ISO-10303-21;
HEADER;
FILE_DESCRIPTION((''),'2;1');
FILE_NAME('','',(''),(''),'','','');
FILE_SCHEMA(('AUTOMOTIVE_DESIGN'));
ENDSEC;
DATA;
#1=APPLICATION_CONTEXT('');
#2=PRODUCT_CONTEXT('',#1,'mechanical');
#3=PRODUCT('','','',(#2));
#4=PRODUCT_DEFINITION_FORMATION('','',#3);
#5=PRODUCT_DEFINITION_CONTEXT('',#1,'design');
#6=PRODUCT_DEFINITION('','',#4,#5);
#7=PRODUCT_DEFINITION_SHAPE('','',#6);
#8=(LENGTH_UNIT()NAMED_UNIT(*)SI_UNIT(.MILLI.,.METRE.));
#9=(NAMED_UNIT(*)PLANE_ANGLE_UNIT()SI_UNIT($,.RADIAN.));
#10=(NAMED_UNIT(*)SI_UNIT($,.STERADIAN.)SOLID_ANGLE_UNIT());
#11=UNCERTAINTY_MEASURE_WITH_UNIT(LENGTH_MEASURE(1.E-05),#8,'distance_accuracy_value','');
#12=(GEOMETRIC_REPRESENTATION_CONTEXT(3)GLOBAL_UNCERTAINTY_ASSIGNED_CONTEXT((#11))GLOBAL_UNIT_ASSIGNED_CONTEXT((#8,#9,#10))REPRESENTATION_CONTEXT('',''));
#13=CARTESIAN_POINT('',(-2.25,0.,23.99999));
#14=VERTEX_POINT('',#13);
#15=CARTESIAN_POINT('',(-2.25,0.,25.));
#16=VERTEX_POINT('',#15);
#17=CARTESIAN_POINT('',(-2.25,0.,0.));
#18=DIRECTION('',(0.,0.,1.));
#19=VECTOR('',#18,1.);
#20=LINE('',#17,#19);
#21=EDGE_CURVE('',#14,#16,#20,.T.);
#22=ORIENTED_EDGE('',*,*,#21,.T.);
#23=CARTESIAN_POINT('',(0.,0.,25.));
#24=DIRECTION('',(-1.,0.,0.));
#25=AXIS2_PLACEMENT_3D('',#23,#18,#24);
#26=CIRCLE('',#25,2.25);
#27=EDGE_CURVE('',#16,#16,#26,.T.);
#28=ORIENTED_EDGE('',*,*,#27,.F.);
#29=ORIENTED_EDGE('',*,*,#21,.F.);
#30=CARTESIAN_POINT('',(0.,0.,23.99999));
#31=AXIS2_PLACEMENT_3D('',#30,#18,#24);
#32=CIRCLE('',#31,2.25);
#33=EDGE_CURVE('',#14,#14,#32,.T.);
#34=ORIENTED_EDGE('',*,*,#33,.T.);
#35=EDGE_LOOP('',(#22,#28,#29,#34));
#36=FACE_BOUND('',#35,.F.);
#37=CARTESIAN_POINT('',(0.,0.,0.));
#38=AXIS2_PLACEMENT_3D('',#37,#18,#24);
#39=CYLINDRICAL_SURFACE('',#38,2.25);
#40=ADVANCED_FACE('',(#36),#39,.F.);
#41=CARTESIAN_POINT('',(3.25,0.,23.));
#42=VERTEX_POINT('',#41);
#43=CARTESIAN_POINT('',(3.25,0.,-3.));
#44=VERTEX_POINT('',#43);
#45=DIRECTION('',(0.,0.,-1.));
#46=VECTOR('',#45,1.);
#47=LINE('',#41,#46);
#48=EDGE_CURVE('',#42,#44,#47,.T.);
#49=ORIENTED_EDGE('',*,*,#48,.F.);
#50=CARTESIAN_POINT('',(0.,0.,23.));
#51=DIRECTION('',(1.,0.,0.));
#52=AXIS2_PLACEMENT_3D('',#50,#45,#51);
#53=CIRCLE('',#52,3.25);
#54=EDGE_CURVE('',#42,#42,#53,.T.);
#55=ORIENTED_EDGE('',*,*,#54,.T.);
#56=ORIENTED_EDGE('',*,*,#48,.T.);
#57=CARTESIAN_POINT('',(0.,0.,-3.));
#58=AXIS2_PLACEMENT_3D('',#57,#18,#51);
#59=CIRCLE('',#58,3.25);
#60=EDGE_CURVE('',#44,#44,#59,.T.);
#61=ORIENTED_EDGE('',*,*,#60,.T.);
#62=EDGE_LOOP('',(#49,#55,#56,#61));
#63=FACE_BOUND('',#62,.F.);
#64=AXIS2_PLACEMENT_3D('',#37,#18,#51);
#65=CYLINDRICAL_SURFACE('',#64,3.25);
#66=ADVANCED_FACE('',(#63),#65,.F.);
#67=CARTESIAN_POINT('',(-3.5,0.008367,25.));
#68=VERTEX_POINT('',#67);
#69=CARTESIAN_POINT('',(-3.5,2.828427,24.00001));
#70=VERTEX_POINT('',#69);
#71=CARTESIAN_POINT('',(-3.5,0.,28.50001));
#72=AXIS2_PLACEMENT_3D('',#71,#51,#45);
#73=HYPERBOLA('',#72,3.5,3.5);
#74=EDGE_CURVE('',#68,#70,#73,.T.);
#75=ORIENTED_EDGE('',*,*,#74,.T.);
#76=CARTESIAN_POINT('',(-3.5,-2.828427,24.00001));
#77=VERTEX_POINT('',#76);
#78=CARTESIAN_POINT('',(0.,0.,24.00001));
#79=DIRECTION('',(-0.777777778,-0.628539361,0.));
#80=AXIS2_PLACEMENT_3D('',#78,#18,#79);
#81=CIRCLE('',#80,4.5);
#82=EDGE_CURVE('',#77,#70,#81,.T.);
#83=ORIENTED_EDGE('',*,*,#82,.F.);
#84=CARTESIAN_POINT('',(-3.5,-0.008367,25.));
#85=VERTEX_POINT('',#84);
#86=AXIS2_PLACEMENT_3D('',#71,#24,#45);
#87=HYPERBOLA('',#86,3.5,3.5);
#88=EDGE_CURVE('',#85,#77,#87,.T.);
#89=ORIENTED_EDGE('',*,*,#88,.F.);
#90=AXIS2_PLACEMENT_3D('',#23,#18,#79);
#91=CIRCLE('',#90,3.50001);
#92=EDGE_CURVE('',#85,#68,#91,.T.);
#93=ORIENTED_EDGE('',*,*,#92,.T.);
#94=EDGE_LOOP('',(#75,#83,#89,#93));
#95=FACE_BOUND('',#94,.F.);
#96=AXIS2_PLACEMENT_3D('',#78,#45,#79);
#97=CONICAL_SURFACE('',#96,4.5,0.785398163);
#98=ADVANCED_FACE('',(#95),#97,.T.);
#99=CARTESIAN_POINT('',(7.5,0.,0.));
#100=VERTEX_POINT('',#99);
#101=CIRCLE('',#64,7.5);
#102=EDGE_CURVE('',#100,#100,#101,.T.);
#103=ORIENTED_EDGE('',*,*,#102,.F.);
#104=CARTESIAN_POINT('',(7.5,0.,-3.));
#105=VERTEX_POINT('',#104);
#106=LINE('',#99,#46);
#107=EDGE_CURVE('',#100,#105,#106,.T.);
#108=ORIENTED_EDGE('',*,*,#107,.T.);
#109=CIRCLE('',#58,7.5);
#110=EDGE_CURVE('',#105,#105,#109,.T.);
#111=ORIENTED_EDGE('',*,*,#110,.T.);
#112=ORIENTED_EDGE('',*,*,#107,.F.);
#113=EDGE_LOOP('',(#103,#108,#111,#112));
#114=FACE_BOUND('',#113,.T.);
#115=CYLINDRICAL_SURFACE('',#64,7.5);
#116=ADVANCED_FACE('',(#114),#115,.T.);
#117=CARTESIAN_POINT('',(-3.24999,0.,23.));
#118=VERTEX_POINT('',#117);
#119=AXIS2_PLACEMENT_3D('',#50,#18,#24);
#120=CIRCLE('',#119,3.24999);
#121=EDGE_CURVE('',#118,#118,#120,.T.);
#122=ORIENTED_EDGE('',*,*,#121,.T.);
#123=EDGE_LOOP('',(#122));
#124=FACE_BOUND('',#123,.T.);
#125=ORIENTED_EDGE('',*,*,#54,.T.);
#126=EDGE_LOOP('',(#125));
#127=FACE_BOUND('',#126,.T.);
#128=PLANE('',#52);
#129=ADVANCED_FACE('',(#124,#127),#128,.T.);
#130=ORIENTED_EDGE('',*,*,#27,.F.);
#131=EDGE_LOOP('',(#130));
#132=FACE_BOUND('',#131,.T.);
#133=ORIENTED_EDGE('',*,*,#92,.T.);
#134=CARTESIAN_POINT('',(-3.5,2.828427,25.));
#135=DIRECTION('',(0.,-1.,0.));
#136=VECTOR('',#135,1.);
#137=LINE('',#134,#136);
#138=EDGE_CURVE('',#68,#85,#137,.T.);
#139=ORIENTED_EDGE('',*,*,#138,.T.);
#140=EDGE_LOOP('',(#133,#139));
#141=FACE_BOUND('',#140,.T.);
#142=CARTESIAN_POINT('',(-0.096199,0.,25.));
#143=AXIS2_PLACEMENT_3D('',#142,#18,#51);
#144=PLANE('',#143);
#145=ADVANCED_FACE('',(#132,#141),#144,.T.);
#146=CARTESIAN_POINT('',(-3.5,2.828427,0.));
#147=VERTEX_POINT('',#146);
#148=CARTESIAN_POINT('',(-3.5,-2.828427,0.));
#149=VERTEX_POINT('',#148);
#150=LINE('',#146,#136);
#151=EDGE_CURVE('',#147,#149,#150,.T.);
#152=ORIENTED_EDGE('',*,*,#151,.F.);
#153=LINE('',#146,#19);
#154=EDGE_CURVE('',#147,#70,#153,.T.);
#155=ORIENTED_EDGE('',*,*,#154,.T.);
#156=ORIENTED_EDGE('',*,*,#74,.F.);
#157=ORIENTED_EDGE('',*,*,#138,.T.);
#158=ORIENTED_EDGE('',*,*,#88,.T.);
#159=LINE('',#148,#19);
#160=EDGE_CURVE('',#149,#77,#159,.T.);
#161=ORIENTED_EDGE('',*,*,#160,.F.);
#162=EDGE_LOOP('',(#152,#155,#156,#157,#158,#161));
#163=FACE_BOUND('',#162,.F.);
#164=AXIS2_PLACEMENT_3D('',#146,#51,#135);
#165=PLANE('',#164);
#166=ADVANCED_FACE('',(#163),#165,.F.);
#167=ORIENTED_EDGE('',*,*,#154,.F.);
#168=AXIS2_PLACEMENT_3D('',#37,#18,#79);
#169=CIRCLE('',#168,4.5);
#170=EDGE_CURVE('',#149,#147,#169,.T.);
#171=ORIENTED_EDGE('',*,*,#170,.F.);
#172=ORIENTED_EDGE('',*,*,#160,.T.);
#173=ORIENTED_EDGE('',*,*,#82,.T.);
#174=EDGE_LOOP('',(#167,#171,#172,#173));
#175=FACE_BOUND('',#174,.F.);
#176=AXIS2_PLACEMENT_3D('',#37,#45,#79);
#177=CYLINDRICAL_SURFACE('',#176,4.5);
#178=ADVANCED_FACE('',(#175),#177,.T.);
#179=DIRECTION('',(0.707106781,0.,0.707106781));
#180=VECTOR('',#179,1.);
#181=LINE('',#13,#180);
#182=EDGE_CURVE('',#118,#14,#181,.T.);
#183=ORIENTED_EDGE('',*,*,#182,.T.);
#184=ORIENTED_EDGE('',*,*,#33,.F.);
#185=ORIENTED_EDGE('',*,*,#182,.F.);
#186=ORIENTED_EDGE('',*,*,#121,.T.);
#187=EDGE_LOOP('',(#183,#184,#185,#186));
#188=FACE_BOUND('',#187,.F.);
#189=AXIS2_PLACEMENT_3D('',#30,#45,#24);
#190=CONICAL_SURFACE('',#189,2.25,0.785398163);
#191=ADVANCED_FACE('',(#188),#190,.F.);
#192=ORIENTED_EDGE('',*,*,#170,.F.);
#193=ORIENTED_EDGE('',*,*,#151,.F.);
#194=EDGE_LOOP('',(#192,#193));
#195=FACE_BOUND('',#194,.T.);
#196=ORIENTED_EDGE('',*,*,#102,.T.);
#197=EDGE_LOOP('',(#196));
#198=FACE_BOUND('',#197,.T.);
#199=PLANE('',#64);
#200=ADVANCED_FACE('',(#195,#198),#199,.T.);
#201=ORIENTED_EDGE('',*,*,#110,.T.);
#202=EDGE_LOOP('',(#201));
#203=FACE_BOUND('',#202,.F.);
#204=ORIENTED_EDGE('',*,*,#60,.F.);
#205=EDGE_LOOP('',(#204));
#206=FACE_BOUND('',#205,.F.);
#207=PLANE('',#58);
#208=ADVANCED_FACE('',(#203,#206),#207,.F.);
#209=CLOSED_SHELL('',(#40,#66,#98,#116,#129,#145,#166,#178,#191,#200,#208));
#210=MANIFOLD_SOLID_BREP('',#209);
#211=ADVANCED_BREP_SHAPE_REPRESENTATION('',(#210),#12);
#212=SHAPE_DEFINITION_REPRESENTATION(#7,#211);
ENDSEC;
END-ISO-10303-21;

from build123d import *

# Parameters (mm, degrees)
F1_DEPTH       = 25
F0_R           = 7.5
F2_DEPTH       = 3
F3_D           = 6.5
F3_DEPTH       = 3.001
F4_D           = 4.5
F4_DEPTH       = 25
F4_CBORE_D     = 6.5
F4_CBORE_DEPTH = 23
F4_TIP         = 1.3519363928
F5_SIZE        = 0.99999


# Not quite as in the source:
# - a fillet or chamfer is up to 0.001 mm smaller than in the source, because OpenCascade refuses the exact size


with BuildPart() as f1:
    # F0 (on Top) → F1 (new body)
    with BuildSketch(Plane.XY):
        with BuildLine():
            Line((-3.5, 2.8284271247), (-3.5, -2.8284271247))
            ThreePointArc((-3.5, -2.8284271247), (4.5, 0), (-3.5, 2.8284271247))
        make_face()
    extrude(amount=F1_DEPTH)

    # F0 (on Top) → F2 (join)
    with BuildSketch(Plane.XY):
        Circle(F0_R)
        with BuildLine():
            ThreePointArc((-3.5, 2.8284271247), (4.5, 0), (-3.5, -2.8284271247))
            Line((-3.5, -2.8284271247), (-3.5, 2.8284271247))
        make_face(mode=Mode.SUBTRACT)
        with BuildLine():
            Line((-3.5, 2.8284271247), (-3.5, -2.8284271247))
            ThreePointArc((-3.5, -2.8284271247), (4.5, 0), (-3.5, 2.8284271247))
        make_face()
    extrude(amount=-F2_DEPTH)

    # F3 (through all, one way)
    with BuildSketch(Plane.XY):
        with Locations((0, 0)):
            Circle(F3_D / 2)
    extrude(amount=-F3_DEPTH, mode=Mode.SUBTRACT)

    # F4
    with Locations(Plane(origin=(0, 0, 0), x_dir=(1, 0, 0), z_dir=(0, 0, -1))):
        with Locations((0, 0)):
            CounterBoreHole(F4_D / 2, F4_CBORE_D / 2, F4_CBORE_DEPTH, depth=F4_DEPTH)
            with Locations((0, 0, -(F4_DEPTH + F4_TIP / 2))):  # 118° drill point
                Cone(0, F4_D / 2, F4_TIP, mode=Mode.SUBTRACT)

    # F5 (size 1 in the source; OpenCascade refuses exactly that, so slightly less here)
    f5_edges = [f1.edges().sort_by_distance(p)[0] for p in [
        (4.5, 0, 25),
        (-2.25, 0, 23),
    ]]
    chamfer(f5_edges, length=F5_SIZE)


solid = f1.part
